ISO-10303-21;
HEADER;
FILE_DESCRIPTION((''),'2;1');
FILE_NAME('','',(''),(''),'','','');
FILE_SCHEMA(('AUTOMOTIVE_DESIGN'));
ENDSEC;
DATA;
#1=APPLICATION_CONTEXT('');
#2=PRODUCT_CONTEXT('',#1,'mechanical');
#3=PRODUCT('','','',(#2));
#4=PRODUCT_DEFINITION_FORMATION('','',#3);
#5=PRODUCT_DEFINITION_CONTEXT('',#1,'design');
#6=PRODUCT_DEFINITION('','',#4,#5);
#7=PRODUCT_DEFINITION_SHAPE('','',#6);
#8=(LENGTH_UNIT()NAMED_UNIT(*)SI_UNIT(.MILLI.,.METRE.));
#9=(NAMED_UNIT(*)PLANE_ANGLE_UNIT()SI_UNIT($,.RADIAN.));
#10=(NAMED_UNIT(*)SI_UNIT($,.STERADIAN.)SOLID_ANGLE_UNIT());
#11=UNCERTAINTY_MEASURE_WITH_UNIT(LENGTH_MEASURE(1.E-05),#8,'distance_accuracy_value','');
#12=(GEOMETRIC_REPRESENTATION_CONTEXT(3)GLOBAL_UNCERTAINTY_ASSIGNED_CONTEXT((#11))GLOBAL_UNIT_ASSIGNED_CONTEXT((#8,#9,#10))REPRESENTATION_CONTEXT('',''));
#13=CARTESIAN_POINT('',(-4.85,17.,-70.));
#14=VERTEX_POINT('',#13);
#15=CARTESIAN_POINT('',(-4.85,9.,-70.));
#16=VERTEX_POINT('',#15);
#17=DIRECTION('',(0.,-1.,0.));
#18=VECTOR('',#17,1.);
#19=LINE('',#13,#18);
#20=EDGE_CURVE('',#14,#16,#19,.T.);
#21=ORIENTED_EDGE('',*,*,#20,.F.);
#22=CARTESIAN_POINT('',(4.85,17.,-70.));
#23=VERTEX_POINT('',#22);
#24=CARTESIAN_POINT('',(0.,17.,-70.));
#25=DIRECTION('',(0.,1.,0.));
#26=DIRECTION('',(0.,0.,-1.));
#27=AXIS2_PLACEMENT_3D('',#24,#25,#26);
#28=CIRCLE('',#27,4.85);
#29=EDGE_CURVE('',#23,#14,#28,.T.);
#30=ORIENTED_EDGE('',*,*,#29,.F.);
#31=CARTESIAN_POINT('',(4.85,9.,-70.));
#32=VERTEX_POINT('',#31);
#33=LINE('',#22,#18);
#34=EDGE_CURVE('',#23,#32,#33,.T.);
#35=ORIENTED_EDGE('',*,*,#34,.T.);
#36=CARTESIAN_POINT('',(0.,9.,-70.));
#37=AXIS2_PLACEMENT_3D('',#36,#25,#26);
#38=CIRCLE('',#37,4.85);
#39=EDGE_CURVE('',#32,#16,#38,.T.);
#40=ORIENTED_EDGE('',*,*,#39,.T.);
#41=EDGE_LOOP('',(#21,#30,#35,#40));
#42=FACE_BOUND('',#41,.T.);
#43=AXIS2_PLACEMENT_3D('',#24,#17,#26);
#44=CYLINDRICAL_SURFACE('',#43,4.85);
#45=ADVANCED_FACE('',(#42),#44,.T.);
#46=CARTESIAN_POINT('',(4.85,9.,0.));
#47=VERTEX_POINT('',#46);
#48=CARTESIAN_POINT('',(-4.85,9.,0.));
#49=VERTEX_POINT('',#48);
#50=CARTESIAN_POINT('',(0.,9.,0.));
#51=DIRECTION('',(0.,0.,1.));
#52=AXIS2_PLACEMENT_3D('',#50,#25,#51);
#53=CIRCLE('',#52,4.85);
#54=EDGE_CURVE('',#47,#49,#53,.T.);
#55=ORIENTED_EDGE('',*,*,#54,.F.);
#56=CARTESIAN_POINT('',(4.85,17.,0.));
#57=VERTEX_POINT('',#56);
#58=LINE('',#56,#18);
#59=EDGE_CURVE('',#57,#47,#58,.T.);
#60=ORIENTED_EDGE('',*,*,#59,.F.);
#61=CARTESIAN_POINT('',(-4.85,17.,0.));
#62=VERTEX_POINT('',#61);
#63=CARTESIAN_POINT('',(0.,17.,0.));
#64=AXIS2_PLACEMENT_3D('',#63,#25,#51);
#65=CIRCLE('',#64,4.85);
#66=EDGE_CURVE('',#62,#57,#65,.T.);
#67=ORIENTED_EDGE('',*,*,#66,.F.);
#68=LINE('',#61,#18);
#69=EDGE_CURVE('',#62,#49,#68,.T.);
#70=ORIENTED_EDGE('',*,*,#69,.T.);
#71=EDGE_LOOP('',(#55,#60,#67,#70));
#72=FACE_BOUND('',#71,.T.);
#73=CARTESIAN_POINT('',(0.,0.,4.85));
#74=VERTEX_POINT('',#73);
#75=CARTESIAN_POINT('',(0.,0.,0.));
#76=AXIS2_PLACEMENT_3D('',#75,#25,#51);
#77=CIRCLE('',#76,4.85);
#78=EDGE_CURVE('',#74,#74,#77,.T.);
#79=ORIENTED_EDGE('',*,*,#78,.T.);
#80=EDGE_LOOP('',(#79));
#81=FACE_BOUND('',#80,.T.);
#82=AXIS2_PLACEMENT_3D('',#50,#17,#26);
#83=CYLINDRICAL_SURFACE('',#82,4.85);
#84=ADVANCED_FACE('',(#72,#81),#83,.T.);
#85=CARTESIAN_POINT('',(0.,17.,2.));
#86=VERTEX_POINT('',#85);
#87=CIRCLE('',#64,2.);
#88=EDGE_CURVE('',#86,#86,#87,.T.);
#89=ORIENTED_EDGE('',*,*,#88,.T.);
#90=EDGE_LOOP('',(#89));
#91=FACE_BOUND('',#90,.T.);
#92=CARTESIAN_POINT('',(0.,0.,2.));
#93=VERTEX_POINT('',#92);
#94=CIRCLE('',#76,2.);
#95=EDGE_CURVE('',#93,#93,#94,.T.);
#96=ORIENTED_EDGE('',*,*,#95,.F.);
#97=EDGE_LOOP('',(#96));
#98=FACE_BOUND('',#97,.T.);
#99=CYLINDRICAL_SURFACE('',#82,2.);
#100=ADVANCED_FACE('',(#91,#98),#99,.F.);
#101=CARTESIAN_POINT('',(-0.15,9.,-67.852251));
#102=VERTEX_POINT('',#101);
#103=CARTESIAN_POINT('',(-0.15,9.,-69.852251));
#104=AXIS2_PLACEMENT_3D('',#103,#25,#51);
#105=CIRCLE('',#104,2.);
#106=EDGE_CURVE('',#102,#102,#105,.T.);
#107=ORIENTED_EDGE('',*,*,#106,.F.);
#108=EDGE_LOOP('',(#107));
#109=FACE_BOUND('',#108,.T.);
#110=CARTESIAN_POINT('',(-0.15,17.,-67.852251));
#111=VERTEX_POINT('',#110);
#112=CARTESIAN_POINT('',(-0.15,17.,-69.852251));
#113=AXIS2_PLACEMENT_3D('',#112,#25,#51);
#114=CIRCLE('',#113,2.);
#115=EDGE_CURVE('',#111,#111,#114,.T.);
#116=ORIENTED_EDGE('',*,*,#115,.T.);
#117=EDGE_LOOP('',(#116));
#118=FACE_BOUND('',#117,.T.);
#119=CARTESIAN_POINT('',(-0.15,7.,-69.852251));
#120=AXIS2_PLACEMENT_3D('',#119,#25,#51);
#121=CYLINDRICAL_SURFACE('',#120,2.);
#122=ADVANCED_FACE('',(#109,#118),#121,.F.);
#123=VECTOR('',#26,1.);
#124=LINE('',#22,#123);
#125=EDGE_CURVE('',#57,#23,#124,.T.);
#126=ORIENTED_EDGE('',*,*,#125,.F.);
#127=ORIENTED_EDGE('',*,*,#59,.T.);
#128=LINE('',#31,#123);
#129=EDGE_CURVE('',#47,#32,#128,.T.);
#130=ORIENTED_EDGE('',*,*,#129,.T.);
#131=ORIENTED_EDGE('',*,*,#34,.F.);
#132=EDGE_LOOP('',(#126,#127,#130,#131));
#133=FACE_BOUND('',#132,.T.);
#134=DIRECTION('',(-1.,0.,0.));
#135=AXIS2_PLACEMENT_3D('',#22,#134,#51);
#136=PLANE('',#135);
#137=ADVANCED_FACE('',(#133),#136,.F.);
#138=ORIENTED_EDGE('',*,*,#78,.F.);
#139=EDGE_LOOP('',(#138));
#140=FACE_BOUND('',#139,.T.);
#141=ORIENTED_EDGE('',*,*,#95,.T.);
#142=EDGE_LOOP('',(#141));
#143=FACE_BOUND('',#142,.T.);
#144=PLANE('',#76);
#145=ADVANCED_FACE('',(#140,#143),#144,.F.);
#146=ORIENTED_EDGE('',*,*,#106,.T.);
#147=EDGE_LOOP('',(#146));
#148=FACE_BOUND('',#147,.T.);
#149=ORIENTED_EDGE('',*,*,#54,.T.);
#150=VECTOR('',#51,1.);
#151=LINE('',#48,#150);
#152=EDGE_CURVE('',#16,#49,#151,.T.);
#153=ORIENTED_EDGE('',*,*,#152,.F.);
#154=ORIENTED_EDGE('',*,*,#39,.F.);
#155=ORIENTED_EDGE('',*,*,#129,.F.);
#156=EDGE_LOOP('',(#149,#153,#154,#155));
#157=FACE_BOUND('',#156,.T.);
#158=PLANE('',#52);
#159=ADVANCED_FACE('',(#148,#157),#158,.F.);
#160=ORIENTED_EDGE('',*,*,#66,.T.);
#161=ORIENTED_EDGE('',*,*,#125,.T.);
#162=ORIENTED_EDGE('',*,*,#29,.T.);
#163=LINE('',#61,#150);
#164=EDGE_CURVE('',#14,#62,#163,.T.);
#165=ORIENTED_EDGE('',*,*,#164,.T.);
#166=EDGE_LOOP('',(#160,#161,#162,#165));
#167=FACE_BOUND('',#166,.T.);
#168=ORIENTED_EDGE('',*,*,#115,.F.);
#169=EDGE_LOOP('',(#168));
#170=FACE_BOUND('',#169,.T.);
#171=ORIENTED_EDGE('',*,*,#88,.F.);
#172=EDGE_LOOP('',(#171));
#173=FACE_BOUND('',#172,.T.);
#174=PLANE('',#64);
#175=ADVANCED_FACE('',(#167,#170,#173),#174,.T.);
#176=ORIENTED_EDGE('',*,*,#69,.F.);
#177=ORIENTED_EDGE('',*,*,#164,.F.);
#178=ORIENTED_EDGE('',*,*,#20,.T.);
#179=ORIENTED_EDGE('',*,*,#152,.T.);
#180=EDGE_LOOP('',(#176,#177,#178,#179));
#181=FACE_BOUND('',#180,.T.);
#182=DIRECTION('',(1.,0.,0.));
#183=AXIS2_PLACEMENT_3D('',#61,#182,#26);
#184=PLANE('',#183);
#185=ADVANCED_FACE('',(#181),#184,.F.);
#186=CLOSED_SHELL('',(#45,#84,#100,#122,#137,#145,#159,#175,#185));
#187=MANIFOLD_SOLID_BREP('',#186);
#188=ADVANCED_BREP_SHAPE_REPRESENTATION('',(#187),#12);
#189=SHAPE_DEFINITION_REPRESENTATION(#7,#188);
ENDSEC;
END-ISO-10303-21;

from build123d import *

# Parameters (mm, degrees)
SKETCH1_R           = 4.85
SKETCH1_R_2         = 2
BOSS_EXTRUDE1_DEPTH = 9
BOSS_EXTRUDE2_DEPTH = 8
SKETCH4_R           = 2
CUT_EXTRUDE1_DEPTH  = 10
SKETCH5_R           = 2
CUT_EXTRUDE2_DEPTH  = 10


with BuildPart() as part:
    # Sketch1 → Boss-Extrude1 (new body)
    with BuildSketch(Plane(origin=(0, 0, 0), x_dir=(1, 0, 0), z_dir=(0, 1, 0))):
        Circle(SKETCH1_R)
        Circle(SKETCH1_R_2, mode=Mode.SUBTRACT)
    extrude(amount=BOSS_EXTRUDE1_DEPTH)

    # Sketch2 → Boss-Extrude2 (add)
    with BuildSketch(Plane(origin=(0, 9, 0), x_dir=(1, 0, 0), z_dir=(0, 1, 0))):
        with BuildLine():
            Line((-4.85, 0), (-4.85, 70))
            ThreePointArc((-4.85, 70), (0, 74.85), (4.85, 70))
            Line((4.85, 70), (4.85, 0))
            ThreePointArc((4.85, 0), (0, -4.85), (-4.85, 0))
        make_face()
    extrude(amount=BOSS_EXTRUDE2_DEPTH)

    # Sketch4 → Cut-Extrude1 (cut)
    with BuildSketch(Plane.XZ.offset(-9)):
        Circle(SKETCH4_R)
    extrude(amount=-CUT_EXTRUDE1_DEPTH, mode=Mode.SUBTRACT)

    # Sketch5 → Cut-Extrude2 (cut)
    with BuildSketch(Plane(origin=(0, 17, 0), x_dir=(1, 0, 0), z_dir=(0, 1, 0))):
        with Locations((-0.15, 69.852250506)):
            Circle(SKETCH5_R)
    extrude(amount=-CUT_EXTRUDE2_DEPTH, mode=Mode.SUBTRACT)


solid = part.part
